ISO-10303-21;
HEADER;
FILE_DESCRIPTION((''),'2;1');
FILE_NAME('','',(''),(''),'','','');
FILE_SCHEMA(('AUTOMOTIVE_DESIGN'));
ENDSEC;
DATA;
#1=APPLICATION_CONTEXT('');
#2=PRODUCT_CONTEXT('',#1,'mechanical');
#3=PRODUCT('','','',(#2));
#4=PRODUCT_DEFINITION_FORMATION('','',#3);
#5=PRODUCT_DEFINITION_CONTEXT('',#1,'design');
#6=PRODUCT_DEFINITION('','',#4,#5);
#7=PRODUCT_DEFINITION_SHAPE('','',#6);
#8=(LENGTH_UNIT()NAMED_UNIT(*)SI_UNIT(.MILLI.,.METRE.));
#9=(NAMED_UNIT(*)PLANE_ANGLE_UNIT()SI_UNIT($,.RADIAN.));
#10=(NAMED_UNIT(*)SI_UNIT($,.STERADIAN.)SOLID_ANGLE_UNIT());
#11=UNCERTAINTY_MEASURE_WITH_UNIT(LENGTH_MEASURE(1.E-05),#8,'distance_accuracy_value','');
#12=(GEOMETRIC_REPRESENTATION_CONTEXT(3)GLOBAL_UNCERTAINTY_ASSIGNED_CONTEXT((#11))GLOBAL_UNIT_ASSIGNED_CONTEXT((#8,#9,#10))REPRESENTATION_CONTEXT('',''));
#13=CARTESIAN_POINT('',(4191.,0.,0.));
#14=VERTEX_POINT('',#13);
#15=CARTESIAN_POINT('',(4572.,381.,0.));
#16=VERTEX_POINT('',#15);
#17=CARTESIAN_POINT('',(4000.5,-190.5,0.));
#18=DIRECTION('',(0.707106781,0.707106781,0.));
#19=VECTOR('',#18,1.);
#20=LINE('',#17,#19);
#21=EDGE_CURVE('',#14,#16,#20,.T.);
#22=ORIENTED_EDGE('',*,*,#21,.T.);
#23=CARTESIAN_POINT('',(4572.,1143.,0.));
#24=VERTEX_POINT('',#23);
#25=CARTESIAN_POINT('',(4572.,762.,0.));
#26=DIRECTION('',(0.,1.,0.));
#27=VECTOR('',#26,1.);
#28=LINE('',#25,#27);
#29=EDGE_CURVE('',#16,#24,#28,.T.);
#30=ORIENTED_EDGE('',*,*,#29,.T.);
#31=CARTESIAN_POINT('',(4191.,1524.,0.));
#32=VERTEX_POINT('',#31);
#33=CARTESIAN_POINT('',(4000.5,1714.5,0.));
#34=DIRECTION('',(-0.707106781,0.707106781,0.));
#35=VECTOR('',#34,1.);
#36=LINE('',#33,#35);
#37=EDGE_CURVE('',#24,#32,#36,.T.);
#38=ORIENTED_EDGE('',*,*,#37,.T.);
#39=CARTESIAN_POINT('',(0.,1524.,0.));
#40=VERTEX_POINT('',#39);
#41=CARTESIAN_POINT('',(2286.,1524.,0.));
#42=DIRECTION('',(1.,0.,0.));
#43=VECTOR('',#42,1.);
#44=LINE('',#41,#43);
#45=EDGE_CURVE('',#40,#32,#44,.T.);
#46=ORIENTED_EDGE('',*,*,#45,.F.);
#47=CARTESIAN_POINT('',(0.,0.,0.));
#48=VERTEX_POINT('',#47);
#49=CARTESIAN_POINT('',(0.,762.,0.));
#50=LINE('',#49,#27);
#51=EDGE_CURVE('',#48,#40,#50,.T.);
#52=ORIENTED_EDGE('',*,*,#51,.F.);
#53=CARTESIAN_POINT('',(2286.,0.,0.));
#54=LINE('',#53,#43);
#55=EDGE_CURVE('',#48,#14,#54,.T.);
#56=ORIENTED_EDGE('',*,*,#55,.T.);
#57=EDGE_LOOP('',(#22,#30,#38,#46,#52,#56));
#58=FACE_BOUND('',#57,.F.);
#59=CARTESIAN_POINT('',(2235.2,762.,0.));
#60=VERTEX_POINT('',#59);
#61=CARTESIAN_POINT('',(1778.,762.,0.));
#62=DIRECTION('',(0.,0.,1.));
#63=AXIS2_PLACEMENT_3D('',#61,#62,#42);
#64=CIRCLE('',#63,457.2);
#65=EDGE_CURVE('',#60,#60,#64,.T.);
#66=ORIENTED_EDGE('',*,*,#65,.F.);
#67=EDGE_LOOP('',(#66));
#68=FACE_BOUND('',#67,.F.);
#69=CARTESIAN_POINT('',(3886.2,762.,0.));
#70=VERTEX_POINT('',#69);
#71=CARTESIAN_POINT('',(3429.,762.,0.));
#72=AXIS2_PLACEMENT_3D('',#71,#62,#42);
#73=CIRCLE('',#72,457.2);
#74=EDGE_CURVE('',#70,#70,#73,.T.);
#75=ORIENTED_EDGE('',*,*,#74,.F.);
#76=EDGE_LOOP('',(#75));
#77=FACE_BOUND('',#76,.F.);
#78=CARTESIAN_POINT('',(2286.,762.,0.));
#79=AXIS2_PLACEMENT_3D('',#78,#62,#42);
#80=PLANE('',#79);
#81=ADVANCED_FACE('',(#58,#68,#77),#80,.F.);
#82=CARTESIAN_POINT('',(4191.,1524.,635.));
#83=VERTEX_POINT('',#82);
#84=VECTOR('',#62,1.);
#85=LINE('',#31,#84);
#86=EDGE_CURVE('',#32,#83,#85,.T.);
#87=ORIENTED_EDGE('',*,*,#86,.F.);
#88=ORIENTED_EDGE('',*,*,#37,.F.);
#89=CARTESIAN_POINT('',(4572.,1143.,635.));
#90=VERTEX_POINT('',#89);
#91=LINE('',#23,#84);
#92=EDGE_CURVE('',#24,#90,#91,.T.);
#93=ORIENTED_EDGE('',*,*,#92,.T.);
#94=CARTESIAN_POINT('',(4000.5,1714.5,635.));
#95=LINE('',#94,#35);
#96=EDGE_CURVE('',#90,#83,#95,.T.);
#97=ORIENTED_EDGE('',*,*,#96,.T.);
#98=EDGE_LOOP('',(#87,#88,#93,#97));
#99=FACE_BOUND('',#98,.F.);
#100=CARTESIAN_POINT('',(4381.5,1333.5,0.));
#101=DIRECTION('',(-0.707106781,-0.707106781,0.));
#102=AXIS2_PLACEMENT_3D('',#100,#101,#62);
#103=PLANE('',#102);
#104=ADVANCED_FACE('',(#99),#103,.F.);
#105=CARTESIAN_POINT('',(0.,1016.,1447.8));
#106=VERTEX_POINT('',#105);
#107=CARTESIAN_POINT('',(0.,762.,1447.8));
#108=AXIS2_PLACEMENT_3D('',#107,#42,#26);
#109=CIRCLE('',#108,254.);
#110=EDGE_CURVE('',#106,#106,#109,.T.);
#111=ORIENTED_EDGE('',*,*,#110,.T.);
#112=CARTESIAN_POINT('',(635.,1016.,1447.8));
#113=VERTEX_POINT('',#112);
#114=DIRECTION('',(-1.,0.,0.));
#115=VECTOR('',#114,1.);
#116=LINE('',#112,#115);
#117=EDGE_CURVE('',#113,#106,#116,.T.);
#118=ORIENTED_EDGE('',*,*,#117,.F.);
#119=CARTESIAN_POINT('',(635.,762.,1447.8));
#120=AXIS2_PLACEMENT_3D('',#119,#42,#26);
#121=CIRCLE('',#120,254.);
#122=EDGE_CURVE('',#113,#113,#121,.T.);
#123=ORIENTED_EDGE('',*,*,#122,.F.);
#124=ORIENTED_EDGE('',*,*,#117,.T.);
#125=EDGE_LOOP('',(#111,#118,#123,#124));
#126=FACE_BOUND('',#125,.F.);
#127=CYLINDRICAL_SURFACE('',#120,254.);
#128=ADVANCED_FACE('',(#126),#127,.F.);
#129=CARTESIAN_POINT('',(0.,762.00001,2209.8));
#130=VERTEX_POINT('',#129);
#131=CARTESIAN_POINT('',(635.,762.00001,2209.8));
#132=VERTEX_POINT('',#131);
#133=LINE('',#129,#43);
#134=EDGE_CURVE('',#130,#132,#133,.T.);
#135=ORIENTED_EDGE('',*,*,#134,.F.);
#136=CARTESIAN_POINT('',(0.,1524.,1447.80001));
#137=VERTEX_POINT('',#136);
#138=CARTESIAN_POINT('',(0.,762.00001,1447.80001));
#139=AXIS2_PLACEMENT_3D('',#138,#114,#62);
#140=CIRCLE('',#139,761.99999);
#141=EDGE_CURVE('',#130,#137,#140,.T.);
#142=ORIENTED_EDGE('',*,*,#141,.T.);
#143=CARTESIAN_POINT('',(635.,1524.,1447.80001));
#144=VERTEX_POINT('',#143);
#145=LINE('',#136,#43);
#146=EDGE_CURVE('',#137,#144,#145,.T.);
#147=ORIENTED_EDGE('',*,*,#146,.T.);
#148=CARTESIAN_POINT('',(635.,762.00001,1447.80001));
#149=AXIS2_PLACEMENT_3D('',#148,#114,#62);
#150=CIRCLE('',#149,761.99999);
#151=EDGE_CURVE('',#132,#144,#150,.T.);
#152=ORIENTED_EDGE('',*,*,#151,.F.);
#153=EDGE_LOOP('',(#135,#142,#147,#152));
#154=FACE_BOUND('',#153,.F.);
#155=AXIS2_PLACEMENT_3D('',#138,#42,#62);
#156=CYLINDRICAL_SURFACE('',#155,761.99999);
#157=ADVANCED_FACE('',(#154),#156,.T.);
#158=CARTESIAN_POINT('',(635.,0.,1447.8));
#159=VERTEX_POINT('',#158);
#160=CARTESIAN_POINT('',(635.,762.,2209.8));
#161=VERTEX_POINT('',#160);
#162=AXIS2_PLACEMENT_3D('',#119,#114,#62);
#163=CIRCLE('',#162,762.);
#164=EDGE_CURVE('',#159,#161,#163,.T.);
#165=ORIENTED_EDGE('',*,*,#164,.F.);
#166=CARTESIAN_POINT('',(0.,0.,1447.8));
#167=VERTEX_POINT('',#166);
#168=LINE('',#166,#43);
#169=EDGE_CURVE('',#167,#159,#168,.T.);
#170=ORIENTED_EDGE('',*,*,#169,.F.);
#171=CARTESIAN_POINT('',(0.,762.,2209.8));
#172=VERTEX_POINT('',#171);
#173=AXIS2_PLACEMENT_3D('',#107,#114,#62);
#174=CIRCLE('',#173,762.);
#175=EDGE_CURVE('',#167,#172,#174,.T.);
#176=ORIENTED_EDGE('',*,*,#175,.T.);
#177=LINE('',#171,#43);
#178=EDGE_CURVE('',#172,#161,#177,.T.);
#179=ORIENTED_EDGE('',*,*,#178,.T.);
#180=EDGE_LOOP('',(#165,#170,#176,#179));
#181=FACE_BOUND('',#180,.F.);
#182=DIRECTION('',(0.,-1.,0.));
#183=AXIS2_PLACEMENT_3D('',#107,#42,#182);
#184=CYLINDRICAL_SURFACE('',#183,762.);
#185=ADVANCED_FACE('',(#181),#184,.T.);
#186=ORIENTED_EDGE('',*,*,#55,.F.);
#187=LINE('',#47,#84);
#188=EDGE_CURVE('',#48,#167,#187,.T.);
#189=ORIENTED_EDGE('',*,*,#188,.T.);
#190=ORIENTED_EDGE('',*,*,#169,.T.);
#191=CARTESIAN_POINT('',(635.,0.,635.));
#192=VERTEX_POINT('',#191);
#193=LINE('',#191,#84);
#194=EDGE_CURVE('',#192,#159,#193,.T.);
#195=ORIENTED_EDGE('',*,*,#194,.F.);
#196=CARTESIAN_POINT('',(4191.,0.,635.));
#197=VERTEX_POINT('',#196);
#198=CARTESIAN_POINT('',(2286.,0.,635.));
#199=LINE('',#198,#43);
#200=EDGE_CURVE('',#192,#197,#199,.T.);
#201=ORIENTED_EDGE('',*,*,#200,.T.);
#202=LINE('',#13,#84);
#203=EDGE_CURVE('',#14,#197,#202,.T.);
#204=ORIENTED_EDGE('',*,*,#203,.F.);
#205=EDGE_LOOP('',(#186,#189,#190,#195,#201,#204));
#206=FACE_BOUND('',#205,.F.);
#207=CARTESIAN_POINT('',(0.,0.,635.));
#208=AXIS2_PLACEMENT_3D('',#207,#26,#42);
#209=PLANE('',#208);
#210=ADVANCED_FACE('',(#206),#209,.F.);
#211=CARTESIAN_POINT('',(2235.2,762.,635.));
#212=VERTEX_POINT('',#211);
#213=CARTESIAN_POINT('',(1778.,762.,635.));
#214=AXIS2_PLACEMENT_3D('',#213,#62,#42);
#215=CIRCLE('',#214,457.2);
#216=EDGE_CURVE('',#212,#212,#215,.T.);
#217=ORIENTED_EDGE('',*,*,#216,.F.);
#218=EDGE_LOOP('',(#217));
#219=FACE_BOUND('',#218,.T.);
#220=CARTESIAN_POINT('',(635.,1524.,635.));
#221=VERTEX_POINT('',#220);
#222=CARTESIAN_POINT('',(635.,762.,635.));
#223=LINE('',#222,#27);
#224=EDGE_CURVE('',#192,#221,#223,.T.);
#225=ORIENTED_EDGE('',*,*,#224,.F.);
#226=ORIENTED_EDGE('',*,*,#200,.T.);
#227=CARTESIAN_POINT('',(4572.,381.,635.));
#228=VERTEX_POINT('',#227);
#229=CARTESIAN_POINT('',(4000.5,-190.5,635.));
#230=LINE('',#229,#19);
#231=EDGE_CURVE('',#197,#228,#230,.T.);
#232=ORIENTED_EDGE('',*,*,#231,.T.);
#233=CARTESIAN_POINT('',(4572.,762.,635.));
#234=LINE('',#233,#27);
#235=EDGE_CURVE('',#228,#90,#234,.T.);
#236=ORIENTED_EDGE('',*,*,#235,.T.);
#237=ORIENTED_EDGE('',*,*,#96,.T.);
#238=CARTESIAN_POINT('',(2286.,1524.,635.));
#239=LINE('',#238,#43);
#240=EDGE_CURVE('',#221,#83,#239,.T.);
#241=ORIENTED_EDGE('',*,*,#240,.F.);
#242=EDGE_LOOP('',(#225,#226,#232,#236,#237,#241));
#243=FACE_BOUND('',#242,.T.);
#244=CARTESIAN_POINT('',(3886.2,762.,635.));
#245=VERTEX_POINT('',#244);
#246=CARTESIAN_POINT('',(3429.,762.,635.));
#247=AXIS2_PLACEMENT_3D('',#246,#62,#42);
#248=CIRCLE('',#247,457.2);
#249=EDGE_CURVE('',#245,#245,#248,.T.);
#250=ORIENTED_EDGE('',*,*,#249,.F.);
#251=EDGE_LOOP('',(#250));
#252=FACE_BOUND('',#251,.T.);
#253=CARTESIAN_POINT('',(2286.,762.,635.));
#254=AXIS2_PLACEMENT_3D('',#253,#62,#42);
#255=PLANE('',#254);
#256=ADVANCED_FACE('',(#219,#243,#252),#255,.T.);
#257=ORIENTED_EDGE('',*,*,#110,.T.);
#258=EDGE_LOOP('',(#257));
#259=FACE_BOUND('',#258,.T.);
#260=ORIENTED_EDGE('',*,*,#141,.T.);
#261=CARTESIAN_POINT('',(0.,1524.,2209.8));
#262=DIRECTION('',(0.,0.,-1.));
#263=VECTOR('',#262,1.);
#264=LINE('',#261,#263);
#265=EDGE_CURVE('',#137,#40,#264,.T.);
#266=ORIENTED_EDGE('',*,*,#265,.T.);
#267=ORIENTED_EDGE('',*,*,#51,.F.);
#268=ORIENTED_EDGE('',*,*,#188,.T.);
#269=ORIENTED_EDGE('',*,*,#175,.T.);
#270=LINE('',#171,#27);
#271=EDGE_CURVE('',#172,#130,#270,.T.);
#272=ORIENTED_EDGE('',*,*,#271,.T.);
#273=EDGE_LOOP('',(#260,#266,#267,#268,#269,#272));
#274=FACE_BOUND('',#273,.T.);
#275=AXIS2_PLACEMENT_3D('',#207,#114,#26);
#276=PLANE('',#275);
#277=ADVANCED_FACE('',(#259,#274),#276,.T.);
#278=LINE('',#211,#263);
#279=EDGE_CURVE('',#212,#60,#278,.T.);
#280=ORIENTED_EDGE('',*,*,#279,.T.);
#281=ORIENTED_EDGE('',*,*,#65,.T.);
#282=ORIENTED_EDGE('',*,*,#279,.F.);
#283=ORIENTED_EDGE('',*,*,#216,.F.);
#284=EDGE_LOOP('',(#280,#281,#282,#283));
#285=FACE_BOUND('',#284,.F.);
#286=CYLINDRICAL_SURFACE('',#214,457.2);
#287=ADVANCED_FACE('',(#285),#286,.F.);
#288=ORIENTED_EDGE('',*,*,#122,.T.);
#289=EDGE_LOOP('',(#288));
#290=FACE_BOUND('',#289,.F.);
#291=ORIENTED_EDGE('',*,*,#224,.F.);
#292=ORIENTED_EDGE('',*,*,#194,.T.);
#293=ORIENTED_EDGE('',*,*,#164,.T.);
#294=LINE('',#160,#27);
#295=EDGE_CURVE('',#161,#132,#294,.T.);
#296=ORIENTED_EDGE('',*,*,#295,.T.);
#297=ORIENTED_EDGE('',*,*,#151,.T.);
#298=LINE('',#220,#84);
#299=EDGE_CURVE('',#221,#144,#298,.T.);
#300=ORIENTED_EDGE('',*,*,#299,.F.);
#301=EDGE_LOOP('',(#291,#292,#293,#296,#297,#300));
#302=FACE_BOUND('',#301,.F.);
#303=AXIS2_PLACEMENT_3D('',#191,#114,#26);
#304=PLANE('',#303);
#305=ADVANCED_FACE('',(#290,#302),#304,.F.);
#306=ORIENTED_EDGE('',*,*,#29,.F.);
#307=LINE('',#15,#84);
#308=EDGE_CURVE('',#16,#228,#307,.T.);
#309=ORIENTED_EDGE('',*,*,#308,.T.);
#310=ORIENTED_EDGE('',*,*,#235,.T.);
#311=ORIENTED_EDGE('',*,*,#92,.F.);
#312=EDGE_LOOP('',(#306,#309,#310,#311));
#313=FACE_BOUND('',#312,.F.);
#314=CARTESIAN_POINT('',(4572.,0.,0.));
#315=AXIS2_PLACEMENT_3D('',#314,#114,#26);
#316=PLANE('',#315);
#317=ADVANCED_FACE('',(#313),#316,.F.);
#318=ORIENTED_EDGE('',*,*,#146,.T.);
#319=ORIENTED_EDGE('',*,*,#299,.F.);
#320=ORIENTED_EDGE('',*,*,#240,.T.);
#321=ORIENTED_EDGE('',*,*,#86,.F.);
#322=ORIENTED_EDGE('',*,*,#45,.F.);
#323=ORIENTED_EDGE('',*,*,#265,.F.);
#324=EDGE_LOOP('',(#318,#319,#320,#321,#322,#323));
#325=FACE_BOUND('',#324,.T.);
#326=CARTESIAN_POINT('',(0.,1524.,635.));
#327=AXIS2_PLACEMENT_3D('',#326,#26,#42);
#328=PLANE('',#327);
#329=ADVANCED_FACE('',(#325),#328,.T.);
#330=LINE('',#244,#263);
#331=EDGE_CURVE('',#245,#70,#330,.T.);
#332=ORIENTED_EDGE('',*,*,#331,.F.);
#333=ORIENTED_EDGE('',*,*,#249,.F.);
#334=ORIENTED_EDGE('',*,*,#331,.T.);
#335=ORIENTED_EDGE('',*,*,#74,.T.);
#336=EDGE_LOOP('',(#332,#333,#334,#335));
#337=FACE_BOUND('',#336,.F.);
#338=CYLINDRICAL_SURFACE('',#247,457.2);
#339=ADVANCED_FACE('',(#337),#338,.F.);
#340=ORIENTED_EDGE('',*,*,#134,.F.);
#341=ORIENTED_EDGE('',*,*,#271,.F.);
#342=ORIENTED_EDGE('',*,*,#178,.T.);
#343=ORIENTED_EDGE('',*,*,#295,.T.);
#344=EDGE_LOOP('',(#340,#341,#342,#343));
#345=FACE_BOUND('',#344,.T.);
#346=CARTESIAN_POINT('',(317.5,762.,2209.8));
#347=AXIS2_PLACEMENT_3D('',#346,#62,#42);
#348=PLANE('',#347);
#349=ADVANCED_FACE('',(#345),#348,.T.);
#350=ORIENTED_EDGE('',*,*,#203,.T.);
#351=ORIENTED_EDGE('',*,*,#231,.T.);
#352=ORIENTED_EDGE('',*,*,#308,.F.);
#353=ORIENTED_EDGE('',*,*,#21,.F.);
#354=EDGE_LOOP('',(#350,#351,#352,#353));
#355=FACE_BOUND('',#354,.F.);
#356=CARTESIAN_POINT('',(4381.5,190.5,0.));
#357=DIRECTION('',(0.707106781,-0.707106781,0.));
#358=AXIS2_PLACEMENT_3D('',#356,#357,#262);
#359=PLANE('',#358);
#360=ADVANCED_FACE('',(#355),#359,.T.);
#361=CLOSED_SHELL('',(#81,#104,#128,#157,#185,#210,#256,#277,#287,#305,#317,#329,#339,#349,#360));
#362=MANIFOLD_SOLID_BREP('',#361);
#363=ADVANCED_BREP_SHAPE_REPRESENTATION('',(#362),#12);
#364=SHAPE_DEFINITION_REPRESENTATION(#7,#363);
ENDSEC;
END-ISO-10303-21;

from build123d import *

# Parameters (mm, degrees)
F0_W     = 4572
F0_H     = 1524
F1_DEPTH = 635
F2_W     = 635
F2_H     = 1524
F3_DEPTH = 1574.8
F4_R     = 762
F5_R     = 761.99999
F6_R     = 457.2
F7_DEPTH = 635
F8_R     = 254
F9_DEPTH = 635
F10_SIZE = 381
F11_SIZE = 381


# Not quite as in the source:
# - a fillet or chamfer is up to 0.001 mm smaller than in the source, because OpenCascade refuses the exact size


with BuildPart() as f1:
    # F0 (on Top) → F1 (new body)
    with BuildSketch(Plane.XY):
        with Locations((2286, 762)):
            Rectangle(F0_W, F0_H)
    extrude(amount=F1_DEPTH)

    # F2 (on face) → F3 (join)
    with BuildSketch(Plane.XY.offset(635)):
        with Locations((317.5, 762)):
            Rectangle(F2_W, F2_H)
    extrude(amount=F3_DEPTH)

    # F4
    f4_edges = [f1.edges().sort_by_distance(p)[0] for p in [
        (317.5, 0, 2209.8),
    ]]
    fillet(f4_edges, radius=F4_R)

    # F5 (radius 762 in the source; OpenCascade refuses exactly that, so slightly less here)
    f5_edges = [f1.edges().sort_by_distance(p)[0] for p in [
        (317.5, 1524, 2209.8),
    ]]
    fillet(f5_edges, radius=F5_R)

    # F6 (on face) → F7 (cut, through all)
    with BuildSketch(Plane.XY.offset(635)):
        with Locations((1778, 762)):
            Circle(F6_R)
        with Locations((3429, 762)):
            Circle(F6_R)
    extrude(amount=-F7_DEPTH, mode=Mode.SUBTRACT)

    # F8 (on face) → F9 (cut, through all)
    with BuildSketch(Plane.YZ.offset(635)):
        with Locations((762, 1447.8)):
            Circle(F8_R)
    extrude(amount=-F9_DEPTH, mode=Mode.SUBTRACT)

    # F10
    f10_edges = [f1.edges().sort_by_distance(p)[0] for p in [
        (4572, 0, 317.5),
    ]]
    chamfer(f10_edges, length=F10_SIZE)

    # F11
    f11_edges = [f1.edges().sort_by_distance(p)[0] for p in [
        (4572, 1524, 317.5),
    ]]
    chamfer(f11_edges, length=F11_SIZE)


solid = f1.part
